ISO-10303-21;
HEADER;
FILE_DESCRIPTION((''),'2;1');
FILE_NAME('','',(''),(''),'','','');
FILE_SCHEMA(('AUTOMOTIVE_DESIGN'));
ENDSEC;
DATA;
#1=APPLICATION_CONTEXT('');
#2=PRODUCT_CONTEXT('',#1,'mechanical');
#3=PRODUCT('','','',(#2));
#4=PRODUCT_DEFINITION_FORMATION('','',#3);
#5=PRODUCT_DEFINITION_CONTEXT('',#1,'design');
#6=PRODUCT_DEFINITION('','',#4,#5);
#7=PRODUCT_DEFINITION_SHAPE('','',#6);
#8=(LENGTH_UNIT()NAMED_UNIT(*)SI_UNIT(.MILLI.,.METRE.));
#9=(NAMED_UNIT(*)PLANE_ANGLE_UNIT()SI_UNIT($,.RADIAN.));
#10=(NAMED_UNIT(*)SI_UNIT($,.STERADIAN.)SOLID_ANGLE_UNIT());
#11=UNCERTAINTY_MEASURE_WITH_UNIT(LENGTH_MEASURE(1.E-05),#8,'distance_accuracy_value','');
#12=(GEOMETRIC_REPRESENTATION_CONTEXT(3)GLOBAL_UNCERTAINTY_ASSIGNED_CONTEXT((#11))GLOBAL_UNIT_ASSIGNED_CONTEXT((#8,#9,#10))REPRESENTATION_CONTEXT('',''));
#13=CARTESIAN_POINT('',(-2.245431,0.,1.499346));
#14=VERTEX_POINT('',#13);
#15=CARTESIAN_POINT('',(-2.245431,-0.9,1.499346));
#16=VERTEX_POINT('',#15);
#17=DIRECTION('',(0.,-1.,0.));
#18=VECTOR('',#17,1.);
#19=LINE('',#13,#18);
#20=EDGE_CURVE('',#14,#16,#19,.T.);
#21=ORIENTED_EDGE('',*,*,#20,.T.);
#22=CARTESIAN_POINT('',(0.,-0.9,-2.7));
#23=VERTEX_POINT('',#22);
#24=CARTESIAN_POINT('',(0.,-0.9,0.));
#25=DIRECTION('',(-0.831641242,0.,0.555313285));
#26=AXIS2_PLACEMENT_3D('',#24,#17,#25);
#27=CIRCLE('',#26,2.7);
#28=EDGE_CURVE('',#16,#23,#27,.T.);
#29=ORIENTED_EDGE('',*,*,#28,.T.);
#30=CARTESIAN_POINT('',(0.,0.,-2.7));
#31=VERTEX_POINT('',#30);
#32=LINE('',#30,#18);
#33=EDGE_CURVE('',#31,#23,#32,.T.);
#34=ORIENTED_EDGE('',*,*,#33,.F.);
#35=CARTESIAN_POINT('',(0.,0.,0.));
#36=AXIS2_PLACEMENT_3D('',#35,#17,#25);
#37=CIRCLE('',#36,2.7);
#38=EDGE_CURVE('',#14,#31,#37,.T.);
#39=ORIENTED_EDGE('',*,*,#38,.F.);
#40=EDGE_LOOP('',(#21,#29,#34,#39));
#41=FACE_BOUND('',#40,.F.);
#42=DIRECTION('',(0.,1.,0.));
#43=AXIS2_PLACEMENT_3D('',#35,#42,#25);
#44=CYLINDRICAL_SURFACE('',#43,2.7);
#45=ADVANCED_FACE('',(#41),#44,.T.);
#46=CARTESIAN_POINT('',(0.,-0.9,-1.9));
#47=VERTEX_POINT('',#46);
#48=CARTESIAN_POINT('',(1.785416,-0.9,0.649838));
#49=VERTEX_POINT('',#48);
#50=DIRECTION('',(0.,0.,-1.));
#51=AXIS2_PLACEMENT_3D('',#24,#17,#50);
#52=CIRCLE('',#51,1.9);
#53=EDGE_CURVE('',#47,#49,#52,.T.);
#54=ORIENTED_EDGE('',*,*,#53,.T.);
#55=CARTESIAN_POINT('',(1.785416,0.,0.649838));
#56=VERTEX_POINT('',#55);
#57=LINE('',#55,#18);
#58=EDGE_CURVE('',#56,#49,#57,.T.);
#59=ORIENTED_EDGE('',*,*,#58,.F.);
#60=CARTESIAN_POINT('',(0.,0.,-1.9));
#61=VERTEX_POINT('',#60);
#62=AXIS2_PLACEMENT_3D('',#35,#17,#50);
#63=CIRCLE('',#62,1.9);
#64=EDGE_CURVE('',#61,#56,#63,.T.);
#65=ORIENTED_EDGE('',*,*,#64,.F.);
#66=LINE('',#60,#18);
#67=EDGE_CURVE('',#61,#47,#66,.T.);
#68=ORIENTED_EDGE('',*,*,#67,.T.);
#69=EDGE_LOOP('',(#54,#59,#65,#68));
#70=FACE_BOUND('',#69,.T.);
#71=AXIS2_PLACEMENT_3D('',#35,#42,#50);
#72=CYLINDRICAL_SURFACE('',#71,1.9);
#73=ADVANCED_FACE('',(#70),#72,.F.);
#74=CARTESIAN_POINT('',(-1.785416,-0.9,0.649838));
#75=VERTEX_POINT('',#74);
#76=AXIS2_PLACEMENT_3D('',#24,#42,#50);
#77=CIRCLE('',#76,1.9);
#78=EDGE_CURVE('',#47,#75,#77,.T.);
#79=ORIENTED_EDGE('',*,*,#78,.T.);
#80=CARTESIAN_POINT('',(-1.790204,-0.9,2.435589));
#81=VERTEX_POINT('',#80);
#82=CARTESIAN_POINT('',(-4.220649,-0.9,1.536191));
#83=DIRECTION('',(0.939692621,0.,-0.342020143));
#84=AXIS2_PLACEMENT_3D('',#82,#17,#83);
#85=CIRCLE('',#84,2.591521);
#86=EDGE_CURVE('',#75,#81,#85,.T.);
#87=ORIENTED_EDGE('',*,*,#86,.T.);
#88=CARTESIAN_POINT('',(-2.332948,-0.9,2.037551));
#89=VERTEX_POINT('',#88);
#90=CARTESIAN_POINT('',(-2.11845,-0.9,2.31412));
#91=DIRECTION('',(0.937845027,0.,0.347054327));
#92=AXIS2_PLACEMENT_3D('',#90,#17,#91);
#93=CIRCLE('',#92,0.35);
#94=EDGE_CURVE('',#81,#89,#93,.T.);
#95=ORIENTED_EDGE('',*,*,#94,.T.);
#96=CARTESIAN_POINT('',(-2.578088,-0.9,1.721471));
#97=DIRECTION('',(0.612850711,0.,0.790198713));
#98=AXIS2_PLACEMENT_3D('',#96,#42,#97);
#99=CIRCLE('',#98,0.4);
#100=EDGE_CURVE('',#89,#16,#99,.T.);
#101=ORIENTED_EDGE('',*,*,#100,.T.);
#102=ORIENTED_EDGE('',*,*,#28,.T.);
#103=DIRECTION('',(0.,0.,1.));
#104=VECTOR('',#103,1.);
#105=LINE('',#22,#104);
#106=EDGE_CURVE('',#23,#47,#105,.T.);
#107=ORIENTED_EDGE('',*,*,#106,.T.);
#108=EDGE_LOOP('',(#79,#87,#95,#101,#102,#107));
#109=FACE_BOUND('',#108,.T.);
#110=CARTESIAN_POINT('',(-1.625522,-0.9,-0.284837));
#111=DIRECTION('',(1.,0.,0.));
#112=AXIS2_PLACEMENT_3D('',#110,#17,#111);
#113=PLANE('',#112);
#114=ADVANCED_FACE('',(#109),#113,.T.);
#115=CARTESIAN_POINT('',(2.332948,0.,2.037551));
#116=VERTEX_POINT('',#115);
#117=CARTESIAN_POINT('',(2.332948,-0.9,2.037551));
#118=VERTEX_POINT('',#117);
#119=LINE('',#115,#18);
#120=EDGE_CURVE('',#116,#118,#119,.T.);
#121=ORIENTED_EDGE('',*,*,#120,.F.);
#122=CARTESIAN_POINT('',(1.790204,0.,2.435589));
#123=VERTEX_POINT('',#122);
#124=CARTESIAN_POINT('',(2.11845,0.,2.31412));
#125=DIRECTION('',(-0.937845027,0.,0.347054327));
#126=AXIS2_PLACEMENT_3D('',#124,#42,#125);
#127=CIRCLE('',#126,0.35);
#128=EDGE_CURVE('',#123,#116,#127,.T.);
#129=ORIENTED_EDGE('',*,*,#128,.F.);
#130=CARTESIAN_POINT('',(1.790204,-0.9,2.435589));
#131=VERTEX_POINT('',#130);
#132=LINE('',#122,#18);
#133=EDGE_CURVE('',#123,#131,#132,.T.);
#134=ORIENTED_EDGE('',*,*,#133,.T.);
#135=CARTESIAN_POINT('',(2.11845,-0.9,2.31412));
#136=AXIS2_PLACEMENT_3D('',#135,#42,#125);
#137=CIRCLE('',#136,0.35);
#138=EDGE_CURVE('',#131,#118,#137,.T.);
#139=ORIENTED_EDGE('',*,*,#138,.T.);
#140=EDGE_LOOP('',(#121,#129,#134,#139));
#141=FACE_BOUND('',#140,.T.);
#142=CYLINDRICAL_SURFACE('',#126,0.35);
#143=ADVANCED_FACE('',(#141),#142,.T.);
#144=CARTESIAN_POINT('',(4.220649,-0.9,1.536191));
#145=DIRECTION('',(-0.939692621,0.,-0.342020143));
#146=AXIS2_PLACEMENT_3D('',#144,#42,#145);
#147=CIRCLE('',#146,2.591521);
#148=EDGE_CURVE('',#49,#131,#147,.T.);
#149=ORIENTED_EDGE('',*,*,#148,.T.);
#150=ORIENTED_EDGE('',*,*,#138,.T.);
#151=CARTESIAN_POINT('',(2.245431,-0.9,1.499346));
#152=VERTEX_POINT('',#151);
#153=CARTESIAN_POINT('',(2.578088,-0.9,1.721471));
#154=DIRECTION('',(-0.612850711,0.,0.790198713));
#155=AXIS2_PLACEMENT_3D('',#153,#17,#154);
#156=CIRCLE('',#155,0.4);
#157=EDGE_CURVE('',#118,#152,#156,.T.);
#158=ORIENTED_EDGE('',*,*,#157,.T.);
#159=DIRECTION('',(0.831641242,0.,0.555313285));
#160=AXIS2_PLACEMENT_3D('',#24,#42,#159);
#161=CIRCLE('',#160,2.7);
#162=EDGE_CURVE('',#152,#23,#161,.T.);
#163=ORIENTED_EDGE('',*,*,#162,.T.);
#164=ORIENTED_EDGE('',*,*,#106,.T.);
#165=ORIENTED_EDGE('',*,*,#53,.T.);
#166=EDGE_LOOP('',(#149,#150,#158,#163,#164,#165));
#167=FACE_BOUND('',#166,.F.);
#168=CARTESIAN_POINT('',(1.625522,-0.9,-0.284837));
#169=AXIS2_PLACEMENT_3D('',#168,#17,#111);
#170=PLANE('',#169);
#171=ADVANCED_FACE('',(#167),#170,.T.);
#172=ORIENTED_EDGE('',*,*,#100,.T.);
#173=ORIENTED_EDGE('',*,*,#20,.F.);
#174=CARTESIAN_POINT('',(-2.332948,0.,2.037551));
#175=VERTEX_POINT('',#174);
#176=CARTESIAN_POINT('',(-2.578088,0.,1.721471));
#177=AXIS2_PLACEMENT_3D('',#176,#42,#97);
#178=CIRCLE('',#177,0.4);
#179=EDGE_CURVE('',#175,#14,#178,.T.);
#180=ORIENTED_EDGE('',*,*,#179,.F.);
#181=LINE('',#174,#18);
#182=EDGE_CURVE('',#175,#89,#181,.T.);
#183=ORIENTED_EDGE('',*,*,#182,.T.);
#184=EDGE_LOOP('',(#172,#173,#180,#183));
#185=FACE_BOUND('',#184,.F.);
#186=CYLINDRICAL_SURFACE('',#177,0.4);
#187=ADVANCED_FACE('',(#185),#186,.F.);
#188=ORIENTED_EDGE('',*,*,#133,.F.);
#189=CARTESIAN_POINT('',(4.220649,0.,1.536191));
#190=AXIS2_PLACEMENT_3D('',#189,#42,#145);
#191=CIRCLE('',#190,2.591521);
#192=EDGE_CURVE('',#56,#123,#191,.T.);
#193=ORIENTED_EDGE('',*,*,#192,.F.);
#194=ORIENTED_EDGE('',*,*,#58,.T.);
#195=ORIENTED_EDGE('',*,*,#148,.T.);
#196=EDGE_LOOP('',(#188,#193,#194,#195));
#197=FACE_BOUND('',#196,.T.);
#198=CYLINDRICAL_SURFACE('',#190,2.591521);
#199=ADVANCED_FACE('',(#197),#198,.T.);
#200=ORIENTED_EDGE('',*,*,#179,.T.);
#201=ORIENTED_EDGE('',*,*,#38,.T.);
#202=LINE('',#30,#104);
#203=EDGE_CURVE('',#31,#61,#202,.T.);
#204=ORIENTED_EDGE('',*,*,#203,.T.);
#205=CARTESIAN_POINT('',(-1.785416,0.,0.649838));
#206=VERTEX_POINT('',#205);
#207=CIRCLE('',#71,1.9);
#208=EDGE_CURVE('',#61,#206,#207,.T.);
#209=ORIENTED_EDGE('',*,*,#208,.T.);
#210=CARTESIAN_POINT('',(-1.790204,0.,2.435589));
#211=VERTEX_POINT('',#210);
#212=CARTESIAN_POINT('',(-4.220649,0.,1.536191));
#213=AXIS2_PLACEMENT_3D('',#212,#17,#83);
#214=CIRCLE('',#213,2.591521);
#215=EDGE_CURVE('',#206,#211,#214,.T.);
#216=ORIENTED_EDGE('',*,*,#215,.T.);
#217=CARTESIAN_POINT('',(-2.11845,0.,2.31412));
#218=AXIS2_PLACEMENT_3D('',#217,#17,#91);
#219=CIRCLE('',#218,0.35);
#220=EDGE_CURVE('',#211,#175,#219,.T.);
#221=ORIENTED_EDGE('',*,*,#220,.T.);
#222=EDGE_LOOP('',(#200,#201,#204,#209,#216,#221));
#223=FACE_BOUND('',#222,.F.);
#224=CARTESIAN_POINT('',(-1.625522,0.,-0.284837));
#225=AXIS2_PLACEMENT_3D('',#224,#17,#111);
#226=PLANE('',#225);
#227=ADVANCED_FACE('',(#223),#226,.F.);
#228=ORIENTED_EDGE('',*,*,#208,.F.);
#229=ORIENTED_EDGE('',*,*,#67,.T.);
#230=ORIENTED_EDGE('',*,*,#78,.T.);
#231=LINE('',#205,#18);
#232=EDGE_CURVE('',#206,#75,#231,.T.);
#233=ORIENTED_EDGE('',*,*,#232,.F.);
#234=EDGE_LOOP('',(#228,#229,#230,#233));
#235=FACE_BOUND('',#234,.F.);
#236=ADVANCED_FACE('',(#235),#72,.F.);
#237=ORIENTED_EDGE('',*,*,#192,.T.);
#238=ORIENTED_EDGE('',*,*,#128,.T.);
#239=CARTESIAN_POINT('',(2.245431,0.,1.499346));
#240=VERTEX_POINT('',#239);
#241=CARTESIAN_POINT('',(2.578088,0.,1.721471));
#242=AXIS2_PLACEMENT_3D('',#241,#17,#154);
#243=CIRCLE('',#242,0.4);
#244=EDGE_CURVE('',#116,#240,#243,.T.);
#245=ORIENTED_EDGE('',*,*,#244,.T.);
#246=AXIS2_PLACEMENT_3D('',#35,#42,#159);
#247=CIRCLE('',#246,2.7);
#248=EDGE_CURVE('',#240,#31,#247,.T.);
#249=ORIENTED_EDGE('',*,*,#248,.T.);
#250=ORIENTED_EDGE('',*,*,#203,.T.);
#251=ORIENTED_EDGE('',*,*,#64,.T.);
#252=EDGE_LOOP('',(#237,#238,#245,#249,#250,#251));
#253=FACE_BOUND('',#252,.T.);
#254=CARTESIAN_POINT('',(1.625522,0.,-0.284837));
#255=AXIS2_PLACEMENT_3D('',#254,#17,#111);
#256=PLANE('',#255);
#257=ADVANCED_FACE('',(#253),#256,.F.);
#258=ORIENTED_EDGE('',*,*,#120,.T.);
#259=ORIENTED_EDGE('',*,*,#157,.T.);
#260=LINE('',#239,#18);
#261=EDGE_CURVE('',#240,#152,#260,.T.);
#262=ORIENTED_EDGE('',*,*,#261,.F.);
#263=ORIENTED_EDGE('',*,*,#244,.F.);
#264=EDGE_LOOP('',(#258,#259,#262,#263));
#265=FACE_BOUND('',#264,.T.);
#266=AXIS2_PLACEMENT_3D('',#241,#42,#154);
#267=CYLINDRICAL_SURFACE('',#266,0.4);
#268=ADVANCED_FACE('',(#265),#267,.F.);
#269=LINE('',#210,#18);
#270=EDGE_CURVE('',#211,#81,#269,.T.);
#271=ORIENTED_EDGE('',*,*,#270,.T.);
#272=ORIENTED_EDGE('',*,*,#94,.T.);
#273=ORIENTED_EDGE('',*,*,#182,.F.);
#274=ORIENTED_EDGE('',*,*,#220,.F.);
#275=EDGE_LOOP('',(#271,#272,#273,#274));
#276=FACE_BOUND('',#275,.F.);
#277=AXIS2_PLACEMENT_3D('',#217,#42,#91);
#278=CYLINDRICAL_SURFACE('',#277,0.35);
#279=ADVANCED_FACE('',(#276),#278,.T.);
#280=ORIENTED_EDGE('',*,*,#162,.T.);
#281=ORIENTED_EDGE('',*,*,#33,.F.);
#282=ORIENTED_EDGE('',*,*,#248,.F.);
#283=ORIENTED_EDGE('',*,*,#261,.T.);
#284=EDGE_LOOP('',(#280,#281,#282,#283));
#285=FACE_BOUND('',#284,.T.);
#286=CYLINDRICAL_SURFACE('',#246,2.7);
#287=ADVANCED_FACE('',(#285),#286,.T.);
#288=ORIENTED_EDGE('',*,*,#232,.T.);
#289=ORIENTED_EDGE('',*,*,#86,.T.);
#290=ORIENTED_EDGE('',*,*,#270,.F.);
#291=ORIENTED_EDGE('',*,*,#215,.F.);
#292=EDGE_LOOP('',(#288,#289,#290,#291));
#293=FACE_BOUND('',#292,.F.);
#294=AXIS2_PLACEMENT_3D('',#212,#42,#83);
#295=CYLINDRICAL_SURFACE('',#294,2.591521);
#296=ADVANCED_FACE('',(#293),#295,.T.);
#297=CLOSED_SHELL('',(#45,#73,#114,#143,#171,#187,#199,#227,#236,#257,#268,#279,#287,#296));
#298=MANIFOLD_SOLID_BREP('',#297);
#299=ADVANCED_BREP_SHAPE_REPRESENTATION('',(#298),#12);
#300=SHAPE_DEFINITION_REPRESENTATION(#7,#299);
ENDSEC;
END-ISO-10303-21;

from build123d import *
from build123d import SkipClean  # not in build123d's __all__

# Parameters (mm, degrees)
F1_DEPTH = 0.9


with BuildPart() as f1:
    # F0 (on Front) → F1 (new body)
    with BuildSketch(Plane.XZ):
        with BuildLine():
            ThreePointArc((-1.7854159795, 0.6498382723), (-1.6291374554, 1.5431391957), (-1.7902040585, 2.4355892314))
            ThreePointArc((-1.7902040585, 2.4355892314), (-2.3254361147, 2.5963553546), (-2.3329475668, 2.0375506674))
            ThreePointArc((-2.3329475668, 2.0375506674), (-2.1832734878, 1.7856710143), (-2.2454313543, 1.4993458684))
            ThreePointArc((-2.2454313543, 1.4993458684), (-2.3809907439, -1.2731390645), (0, -2.7))
            Line((0, -2.7), (0, -1.9))
            ThreePointArc((0, -1.9), (-1.5563888841, -1.0897952291), (-1.7854159795, 0.6498382723))
        make_face()
    extrude(amount=F1_DEPTH)

    # F2: F1 across plane


with BuildPart() as f1_1:
    add(f1.part, clean=False)
    with SkipClean():  # cleaning this boolean's faces spoils the solid; the shape is the same uncleaned
        add(f1.part.mirror(Plane.YZ), clean=False)


solid = f1_1.part
